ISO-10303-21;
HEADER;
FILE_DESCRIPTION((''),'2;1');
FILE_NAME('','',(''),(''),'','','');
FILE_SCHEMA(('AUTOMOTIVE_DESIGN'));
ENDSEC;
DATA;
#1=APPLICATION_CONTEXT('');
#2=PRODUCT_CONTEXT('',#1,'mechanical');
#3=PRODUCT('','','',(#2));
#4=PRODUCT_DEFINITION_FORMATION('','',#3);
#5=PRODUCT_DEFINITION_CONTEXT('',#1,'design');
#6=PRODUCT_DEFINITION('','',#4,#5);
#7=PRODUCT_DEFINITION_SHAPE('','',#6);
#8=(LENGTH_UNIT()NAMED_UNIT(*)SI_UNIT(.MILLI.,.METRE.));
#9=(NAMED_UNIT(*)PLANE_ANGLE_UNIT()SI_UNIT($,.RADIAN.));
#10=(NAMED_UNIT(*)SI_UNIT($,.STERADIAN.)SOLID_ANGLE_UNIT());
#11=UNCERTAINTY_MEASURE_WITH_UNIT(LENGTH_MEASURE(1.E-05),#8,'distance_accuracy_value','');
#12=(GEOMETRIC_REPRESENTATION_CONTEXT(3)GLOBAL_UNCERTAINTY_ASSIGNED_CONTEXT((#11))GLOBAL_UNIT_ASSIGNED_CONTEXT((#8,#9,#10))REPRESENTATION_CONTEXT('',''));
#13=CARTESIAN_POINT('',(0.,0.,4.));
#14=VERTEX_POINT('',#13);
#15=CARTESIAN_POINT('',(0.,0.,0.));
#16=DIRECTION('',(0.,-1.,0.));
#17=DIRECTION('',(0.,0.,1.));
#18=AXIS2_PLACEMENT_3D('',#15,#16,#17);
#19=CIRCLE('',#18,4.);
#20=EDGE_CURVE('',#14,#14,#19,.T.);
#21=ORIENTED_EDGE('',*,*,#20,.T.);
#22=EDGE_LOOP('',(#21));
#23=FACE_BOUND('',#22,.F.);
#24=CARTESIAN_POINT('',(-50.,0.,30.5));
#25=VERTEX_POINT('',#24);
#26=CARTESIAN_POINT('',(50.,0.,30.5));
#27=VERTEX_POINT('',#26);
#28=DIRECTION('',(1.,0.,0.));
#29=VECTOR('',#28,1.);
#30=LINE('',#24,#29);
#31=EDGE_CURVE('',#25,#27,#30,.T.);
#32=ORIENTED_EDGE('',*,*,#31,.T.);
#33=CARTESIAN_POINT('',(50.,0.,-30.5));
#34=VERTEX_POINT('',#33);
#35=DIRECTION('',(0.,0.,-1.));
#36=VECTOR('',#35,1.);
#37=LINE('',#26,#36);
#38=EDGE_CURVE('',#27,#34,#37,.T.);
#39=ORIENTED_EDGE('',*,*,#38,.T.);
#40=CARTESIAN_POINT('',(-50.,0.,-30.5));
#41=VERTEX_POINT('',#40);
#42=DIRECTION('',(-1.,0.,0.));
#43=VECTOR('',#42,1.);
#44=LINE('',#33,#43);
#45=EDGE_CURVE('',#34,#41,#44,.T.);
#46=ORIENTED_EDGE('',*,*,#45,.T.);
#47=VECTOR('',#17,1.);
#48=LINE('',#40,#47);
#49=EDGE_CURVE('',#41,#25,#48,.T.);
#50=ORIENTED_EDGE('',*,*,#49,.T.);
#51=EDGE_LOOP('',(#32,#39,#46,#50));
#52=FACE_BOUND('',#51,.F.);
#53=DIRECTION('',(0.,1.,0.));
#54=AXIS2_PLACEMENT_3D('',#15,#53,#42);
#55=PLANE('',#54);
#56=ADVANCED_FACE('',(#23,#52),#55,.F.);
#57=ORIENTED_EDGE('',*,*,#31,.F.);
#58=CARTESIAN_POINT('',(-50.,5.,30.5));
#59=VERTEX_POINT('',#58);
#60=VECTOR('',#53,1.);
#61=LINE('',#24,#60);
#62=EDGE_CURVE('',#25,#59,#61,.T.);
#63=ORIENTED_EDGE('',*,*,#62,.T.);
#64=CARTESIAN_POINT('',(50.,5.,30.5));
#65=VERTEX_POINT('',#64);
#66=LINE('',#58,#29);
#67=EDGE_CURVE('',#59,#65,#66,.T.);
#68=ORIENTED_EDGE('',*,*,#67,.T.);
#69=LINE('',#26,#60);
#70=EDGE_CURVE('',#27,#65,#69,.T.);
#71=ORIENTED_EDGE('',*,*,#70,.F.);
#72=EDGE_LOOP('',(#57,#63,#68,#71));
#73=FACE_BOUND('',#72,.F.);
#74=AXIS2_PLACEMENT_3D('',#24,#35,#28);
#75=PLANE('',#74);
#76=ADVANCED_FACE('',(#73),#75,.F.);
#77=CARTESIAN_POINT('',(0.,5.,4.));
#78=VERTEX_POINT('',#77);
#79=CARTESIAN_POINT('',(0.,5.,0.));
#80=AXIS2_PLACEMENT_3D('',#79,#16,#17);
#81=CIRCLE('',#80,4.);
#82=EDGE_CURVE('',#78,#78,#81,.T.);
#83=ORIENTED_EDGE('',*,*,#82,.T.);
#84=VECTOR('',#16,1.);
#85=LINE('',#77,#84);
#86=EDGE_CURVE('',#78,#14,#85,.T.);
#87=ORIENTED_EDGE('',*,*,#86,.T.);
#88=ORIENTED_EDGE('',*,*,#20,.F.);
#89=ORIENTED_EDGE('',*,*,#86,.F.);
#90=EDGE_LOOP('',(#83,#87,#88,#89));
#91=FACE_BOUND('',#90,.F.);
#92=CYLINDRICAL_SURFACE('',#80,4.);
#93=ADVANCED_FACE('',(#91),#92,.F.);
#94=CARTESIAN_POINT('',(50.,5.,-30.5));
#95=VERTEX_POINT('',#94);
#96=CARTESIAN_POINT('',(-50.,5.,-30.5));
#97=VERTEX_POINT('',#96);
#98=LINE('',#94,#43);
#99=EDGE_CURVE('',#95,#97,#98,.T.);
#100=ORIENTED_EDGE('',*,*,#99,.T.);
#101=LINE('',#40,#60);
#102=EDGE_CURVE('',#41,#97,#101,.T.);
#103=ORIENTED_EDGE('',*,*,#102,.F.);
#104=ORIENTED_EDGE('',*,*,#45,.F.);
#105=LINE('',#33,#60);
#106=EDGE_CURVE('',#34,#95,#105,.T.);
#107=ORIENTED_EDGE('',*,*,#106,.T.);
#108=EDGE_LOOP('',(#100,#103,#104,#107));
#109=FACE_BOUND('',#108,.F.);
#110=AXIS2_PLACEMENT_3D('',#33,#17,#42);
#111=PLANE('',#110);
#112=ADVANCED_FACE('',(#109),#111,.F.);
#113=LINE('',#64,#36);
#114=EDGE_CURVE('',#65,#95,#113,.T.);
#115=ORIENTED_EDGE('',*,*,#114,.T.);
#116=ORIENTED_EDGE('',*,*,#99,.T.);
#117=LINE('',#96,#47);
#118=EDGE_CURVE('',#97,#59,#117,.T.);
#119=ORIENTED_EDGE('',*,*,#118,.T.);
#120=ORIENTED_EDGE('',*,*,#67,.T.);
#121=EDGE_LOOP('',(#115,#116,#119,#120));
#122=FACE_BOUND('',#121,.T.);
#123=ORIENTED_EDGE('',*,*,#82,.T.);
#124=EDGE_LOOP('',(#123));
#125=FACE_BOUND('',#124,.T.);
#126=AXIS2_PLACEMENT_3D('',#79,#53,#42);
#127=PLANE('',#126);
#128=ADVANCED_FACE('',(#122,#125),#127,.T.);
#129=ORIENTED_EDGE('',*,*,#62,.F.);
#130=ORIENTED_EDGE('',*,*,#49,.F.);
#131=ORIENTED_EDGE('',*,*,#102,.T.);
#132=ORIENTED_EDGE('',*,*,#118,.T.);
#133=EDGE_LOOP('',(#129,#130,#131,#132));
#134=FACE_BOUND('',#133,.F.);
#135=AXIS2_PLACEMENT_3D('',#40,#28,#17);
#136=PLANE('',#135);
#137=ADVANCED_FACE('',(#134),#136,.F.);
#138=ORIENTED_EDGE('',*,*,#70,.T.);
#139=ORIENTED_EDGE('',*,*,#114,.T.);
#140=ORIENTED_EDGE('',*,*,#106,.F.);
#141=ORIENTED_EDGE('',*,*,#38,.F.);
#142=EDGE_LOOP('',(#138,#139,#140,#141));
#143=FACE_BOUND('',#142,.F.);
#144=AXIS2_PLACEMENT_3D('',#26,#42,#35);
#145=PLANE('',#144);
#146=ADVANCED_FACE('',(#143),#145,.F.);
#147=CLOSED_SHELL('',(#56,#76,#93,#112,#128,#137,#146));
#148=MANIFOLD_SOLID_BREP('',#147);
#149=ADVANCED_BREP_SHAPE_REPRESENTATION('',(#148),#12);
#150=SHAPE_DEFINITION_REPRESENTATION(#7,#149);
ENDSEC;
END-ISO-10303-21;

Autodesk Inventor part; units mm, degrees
ref_plane "YZ Plane" through (0, 0, 0) normal (1, 0, 0) x (0, 1, 0)
ref_plane "XZ Plane" through (0, 0, 0) normal (0, 1, 0) x (-1, 0, 0)
ref_plane "XY Plane" through (0, 0, 0) normal (0, 0, 1) x (1, 0, 0)
sketch "Sketch1" plane through (0, 0, 0) normal (0, 1, 0) x (-1, 0, 0)
  line L0 (50, 30.5) -> (-50, 30.5)
  line L1 (-50, 30.5) -> (-50, -30.5)
  line L2 (-50, -30.5) -> (50, -30.5)
  line L3 (50, -30.5) -> (50, 30.5)
  line L4 (50, 30.5) -> (-50, -30.5) construction
  line L5 (-50, 30.5) -> (50, -30.5) construction
  point P0 (0, 0)
  dimension "d4" = 61
  dimension "d5" = 100
extrude "Extrusion1" add sketch "Sketch1" along normal blind 5
sketch "Sketch2" plane through (0, 5, 0) normal (0, 1, 0) x (1, 0, 0)
  point P0 (0, 0)
hole "Hole1" at (0, 5, 0) direction (0, -1, 0) diameter 8 end up to surface
properties part number "jalador"
